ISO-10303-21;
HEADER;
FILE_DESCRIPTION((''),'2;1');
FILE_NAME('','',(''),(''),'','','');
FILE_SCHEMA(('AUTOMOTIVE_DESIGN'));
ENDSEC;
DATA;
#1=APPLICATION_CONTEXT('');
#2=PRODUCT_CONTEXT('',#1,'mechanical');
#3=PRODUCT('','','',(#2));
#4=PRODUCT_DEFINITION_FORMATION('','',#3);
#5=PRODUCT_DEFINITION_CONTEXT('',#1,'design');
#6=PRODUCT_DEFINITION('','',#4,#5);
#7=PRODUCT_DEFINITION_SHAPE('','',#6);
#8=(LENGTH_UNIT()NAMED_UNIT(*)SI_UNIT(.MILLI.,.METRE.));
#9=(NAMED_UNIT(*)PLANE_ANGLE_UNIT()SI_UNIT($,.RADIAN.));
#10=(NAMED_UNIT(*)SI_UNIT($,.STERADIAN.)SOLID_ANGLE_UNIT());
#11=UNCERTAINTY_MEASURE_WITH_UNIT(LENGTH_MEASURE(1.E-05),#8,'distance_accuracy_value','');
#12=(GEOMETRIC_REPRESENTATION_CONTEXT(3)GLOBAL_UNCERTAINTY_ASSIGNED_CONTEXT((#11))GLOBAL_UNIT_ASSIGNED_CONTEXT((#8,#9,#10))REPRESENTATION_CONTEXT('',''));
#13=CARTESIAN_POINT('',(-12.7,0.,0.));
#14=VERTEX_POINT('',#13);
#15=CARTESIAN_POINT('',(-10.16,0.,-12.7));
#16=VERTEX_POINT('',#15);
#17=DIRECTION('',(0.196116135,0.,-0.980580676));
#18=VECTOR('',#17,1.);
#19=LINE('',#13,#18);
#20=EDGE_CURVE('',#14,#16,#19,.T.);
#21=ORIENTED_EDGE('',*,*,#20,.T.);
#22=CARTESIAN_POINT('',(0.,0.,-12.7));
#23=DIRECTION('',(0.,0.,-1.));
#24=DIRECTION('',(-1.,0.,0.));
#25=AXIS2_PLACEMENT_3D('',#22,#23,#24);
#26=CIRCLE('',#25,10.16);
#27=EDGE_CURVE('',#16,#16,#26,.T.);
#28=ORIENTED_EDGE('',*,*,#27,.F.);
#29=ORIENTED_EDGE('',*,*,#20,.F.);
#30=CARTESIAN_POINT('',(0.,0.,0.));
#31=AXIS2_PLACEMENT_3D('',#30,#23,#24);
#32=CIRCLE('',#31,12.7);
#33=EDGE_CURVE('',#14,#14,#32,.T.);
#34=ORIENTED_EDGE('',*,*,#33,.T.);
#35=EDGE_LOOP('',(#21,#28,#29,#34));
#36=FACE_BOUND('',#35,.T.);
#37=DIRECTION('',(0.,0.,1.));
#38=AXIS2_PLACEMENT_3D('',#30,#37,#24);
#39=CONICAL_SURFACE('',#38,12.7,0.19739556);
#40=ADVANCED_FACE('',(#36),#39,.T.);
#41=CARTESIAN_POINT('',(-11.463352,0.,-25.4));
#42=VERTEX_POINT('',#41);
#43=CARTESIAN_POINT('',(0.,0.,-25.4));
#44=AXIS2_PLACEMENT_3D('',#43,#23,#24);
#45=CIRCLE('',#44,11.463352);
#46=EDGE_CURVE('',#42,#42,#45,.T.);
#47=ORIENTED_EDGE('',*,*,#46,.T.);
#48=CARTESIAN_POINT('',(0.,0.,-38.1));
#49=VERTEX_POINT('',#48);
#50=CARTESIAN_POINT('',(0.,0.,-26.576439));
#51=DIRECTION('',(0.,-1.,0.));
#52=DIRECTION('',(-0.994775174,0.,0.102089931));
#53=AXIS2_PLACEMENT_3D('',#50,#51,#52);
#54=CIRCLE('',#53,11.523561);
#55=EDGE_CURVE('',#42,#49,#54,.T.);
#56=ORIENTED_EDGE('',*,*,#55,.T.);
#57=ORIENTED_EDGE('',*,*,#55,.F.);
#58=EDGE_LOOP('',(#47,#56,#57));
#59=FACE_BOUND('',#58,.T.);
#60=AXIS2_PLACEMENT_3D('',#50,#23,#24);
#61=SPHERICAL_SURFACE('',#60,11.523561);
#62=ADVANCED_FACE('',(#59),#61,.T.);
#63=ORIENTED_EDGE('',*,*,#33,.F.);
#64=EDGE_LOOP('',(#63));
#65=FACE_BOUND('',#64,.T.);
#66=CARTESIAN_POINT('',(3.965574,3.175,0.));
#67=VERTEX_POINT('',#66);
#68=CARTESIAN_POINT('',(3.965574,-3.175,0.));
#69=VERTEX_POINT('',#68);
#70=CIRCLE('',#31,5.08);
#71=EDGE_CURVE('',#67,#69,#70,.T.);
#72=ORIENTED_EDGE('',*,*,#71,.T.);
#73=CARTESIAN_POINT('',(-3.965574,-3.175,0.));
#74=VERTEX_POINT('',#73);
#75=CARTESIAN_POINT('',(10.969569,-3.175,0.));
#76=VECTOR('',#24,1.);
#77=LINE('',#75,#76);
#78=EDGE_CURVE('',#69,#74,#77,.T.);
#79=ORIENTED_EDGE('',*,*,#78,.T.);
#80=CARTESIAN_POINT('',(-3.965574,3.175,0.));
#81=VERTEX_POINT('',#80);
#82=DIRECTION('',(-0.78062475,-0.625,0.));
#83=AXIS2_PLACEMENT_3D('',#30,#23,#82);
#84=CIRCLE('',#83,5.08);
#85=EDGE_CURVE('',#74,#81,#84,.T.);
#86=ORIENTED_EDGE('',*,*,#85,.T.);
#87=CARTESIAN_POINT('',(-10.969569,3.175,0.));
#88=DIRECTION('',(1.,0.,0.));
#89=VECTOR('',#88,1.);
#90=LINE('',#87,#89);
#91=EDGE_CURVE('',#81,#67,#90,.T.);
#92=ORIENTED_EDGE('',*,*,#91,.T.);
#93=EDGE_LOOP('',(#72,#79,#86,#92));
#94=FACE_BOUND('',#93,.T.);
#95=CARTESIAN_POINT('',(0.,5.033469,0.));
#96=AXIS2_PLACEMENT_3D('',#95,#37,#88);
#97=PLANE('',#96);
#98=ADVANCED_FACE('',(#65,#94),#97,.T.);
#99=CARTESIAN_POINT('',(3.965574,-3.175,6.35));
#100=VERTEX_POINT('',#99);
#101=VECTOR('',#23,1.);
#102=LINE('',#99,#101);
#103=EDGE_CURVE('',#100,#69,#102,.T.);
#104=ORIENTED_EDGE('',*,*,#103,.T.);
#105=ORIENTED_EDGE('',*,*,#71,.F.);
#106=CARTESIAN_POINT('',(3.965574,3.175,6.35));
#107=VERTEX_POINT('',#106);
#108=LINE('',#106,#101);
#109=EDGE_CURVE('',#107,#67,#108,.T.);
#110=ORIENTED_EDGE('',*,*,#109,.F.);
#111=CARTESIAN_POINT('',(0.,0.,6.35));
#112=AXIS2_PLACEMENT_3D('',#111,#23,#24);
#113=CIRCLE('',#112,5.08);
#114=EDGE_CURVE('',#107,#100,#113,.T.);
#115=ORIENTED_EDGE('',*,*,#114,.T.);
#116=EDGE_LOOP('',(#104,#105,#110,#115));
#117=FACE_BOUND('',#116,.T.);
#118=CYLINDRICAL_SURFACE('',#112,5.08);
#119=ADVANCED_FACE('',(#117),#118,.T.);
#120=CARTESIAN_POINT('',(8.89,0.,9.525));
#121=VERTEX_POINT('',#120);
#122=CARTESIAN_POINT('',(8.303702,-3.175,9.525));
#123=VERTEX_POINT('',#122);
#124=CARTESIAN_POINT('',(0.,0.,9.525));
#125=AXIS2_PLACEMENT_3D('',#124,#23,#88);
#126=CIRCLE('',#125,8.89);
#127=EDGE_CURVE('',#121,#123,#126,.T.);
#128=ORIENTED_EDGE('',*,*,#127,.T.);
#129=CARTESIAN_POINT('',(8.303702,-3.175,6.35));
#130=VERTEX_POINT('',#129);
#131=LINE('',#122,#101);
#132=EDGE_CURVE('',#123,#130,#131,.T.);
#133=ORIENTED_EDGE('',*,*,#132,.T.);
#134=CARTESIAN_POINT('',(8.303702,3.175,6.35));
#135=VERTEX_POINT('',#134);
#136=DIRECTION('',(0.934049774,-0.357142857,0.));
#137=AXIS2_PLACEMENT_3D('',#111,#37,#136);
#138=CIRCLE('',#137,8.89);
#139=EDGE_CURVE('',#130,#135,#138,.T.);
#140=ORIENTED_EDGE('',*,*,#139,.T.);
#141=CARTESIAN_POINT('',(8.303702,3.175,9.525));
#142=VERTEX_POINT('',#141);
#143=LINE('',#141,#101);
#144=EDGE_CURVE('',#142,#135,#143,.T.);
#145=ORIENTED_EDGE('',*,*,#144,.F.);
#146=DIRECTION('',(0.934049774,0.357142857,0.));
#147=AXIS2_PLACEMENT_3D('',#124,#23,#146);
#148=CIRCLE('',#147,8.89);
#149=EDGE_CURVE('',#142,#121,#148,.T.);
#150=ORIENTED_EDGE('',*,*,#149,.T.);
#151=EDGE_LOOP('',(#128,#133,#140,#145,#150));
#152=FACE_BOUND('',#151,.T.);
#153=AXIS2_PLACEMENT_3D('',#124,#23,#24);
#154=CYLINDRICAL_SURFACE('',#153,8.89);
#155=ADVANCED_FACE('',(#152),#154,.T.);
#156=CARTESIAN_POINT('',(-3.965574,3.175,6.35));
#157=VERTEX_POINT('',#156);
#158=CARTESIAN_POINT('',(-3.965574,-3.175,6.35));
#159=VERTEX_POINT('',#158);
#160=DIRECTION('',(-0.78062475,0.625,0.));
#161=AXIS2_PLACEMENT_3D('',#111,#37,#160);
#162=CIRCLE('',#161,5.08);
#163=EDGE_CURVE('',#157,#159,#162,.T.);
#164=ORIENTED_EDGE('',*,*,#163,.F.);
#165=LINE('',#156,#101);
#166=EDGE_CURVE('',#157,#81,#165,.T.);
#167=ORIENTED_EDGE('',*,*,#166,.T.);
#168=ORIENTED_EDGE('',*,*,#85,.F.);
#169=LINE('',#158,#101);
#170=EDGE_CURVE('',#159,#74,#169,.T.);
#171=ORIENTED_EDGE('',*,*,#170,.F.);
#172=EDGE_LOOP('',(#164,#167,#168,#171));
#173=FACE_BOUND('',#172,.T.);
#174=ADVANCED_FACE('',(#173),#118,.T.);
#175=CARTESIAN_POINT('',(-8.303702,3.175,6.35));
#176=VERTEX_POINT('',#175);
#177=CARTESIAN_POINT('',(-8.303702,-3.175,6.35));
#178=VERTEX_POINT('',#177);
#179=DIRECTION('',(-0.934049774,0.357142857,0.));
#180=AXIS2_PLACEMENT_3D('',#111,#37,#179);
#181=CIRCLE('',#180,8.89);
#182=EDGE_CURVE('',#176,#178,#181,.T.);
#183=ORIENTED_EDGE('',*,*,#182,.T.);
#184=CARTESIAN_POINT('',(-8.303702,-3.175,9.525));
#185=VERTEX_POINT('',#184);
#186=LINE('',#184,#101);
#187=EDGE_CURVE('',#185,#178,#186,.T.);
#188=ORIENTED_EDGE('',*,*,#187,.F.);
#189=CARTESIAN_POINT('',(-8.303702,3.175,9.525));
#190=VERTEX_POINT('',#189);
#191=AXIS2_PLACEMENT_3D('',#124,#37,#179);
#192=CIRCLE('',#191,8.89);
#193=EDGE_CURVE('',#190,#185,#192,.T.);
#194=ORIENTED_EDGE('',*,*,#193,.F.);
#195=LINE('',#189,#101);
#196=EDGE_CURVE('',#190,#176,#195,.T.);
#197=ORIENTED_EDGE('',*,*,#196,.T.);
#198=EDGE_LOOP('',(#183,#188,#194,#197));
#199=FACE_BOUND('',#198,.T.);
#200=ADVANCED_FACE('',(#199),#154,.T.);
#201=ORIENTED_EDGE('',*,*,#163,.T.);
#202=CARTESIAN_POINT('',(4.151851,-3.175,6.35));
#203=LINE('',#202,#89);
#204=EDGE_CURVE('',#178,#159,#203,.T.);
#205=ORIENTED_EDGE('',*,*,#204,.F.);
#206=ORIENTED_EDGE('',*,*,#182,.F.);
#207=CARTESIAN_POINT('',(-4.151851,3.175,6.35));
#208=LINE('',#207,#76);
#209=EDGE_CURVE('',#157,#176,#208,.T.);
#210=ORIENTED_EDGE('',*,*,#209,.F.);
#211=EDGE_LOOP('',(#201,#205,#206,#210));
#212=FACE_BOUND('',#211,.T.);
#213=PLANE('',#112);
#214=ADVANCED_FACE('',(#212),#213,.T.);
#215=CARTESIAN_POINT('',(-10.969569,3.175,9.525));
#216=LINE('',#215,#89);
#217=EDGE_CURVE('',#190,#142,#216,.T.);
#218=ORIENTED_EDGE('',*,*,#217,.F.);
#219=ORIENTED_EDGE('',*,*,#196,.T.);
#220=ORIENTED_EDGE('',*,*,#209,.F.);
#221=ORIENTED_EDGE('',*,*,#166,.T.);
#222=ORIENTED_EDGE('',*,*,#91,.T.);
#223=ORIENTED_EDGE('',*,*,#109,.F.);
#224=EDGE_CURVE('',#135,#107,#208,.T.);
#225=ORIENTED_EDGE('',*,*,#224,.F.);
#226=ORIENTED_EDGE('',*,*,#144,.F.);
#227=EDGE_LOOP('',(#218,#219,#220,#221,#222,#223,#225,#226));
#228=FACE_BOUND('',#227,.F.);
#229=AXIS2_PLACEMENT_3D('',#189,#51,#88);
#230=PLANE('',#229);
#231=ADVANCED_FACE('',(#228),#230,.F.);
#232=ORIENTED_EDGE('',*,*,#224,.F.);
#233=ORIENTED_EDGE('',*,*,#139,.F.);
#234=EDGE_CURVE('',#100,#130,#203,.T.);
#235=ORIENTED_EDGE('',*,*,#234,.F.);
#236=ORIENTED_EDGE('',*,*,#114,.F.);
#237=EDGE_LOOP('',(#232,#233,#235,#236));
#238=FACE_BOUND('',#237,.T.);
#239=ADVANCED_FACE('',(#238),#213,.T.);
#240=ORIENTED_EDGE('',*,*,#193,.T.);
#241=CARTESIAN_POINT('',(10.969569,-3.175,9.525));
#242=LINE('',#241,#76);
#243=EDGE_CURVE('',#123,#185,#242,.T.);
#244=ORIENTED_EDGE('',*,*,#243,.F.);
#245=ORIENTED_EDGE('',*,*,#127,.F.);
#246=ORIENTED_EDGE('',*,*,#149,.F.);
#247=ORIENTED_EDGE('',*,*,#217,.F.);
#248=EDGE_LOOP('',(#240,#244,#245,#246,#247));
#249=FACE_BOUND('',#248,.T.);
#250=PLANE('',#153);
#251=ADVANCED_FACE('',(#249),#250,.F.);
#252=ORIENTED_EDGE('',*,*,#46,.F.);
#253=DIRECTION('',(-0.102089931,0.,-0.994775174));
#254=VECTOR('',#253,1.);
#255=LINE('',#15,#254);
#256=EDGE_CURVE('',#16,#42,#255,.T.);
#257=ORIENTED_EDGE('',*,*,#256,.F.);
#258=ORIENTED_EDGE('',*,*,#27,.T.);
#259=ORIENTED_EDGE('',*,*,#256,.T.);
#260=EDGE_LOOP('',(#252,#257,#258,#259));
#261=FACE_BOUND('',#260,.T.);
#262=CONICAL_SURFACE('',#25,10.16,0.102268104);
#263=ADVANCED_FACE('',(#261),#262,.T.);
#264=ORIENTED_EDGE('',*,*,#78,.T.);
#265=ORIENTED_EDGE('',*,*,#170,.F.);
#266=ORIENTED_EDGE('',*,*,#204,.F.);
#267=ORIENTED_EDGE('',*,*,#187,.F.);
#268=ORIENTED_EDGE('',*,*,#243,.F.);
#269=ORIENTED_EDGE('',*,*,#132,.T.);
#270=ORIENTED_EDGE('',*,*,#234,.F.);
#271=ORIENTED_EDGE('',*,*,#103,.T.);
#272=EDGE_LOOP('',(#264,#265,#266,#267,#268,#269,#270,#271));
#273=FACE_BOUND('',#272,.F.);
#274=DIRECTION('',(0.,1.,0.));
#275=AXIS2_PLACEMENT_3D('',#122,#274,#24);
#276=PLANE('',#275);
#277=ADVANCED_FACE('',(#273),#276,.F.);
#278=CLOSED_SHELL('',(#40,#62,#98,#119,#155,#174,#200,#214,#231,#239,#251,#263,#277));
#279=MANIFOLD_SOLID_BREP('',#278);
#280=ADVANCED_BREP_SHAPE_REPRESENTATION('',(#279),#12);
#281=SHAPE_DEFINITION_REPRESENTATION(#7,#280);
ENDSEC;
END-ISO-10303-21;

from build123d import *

# Parameters (mm, degrees)
F3_DEPTH = 9.525


with BuildPart() as f1:
    # F0 (on Front) → F1 (revolve)
    with BuildSketch(Plane.XZ):
        Polygon((0, -12.7), (0, 0), (-5.08, 0), (-12.7, 0), (-10.16, -12.7), align=None)
        Polygon((-5.08, 0), (0, 0), (0, 9.525), (-8.89, 9.525), (-8.89, 6.35), (-5.08, 6.35), align=None)
        Polygon((0, -25.4), (0, -12.7), (-10.16, -12.7), (-11.4633519053, -25.4), align=None)
        with BuildLine():
            Line((0, -38.1), (0, -25.4))
            Line((0, -25.4), (-11.4633519053, -25.4))
            ThreePointArc((-11.4633519053, -25.4), (-8.5542158744, -34.2976982984), (0, -38.1))
        make_face()
    revolve(axis=Axis((0, 0, -19.05), (0, 0, -1)))

    # F2 (on face) → F3 (cut, through all)
    with BuildSketch(Plane.XY.offset(9.525)):
        with BuildLine():
            ThreePointArc((8.3037024874, 3.175), (0, 8.89), (-8.3037024874, 3.175))
            Line((-8.3037024874, 3.175), (8.3037024874, 3.175))
        make_face()
        with BuildLine():
            Line((8.3037024874, -3.175), (-8.3037024874, -3.175))
            ThreePointArc((-8.3037024874, -3.175), (0, -8.89), (8.3037024874, -3.175))
        make_face()
        with BuildLine():
            ThreePointArc((10.9695693512, 3.175), (0, 11.4198107144), (-10.9695693512, 3.175))
            Line((-10.9695693512, 3.175), (-8.3037024874, 3.175))
            ThreePointArc((-8.3037024874, 3.175), (0, 8.89), (8.3037024874, 3.175))
            Line((8.3037024874, 3.175), (10.9695693512, 3.175))
        make_face()
        with BuildLine():
            Line((-8.3037024874, -3.175), (-10.9695693512, -3.175))
            ThreePointArc((-10.9695693512, -3.175), (0, -11.4198107144), (10.9695693512, -3.175))
            Line((10.9695693512, -3.175), (8.3037024874, -3.175))
            ThreePointArc((8.3037024874, -3.175), (0, -8.89), (-8.3037024874, -3.175))
        make_face()
        with BuildLine():
            Line((-8.3037024874, 3.175), (-10.9695693512, 3.175))
            ThreePointArc((-10.9695693512, 3.175), (-11.4198107144, 0), (-10.9695693512, -3.175))
            Line((-10.9695693512, -3.175), (-8.3037024874, -3.175))
            ThreePointArc((-8.3037024874, -3.175), (-8.89, 0), (-8.3037024874, 3.175))
        make_face()
        with BuildLine():
            ThreePointArc((11.4198107144, 0), (11.3066901072, 1.6033825405), (10.9695693512, 3.175))
            Line((10.9695693512, 3.175), (8.3037024874, 3.175))
            ThreePointArc((8.3037024874, 3.175), (8.7421969525, 1.6143396307), (8.89, 0))
            ThreePointArc((8.89, 0), (8.7421969525, -1.6143396307), (8.3037024874, -3.175))
            Line((8.3037024874, -3.175), (10.9695693512, -3.175))
            ThreePointArc((10.9695693512, -3.175), (11.3066901072, -1.6033825405), (11.4198107144, 0))
        make_face()
    extrude(amount=-F3_DEPTH, mode=Mode.SUBTRACT)


solid = f1.part
